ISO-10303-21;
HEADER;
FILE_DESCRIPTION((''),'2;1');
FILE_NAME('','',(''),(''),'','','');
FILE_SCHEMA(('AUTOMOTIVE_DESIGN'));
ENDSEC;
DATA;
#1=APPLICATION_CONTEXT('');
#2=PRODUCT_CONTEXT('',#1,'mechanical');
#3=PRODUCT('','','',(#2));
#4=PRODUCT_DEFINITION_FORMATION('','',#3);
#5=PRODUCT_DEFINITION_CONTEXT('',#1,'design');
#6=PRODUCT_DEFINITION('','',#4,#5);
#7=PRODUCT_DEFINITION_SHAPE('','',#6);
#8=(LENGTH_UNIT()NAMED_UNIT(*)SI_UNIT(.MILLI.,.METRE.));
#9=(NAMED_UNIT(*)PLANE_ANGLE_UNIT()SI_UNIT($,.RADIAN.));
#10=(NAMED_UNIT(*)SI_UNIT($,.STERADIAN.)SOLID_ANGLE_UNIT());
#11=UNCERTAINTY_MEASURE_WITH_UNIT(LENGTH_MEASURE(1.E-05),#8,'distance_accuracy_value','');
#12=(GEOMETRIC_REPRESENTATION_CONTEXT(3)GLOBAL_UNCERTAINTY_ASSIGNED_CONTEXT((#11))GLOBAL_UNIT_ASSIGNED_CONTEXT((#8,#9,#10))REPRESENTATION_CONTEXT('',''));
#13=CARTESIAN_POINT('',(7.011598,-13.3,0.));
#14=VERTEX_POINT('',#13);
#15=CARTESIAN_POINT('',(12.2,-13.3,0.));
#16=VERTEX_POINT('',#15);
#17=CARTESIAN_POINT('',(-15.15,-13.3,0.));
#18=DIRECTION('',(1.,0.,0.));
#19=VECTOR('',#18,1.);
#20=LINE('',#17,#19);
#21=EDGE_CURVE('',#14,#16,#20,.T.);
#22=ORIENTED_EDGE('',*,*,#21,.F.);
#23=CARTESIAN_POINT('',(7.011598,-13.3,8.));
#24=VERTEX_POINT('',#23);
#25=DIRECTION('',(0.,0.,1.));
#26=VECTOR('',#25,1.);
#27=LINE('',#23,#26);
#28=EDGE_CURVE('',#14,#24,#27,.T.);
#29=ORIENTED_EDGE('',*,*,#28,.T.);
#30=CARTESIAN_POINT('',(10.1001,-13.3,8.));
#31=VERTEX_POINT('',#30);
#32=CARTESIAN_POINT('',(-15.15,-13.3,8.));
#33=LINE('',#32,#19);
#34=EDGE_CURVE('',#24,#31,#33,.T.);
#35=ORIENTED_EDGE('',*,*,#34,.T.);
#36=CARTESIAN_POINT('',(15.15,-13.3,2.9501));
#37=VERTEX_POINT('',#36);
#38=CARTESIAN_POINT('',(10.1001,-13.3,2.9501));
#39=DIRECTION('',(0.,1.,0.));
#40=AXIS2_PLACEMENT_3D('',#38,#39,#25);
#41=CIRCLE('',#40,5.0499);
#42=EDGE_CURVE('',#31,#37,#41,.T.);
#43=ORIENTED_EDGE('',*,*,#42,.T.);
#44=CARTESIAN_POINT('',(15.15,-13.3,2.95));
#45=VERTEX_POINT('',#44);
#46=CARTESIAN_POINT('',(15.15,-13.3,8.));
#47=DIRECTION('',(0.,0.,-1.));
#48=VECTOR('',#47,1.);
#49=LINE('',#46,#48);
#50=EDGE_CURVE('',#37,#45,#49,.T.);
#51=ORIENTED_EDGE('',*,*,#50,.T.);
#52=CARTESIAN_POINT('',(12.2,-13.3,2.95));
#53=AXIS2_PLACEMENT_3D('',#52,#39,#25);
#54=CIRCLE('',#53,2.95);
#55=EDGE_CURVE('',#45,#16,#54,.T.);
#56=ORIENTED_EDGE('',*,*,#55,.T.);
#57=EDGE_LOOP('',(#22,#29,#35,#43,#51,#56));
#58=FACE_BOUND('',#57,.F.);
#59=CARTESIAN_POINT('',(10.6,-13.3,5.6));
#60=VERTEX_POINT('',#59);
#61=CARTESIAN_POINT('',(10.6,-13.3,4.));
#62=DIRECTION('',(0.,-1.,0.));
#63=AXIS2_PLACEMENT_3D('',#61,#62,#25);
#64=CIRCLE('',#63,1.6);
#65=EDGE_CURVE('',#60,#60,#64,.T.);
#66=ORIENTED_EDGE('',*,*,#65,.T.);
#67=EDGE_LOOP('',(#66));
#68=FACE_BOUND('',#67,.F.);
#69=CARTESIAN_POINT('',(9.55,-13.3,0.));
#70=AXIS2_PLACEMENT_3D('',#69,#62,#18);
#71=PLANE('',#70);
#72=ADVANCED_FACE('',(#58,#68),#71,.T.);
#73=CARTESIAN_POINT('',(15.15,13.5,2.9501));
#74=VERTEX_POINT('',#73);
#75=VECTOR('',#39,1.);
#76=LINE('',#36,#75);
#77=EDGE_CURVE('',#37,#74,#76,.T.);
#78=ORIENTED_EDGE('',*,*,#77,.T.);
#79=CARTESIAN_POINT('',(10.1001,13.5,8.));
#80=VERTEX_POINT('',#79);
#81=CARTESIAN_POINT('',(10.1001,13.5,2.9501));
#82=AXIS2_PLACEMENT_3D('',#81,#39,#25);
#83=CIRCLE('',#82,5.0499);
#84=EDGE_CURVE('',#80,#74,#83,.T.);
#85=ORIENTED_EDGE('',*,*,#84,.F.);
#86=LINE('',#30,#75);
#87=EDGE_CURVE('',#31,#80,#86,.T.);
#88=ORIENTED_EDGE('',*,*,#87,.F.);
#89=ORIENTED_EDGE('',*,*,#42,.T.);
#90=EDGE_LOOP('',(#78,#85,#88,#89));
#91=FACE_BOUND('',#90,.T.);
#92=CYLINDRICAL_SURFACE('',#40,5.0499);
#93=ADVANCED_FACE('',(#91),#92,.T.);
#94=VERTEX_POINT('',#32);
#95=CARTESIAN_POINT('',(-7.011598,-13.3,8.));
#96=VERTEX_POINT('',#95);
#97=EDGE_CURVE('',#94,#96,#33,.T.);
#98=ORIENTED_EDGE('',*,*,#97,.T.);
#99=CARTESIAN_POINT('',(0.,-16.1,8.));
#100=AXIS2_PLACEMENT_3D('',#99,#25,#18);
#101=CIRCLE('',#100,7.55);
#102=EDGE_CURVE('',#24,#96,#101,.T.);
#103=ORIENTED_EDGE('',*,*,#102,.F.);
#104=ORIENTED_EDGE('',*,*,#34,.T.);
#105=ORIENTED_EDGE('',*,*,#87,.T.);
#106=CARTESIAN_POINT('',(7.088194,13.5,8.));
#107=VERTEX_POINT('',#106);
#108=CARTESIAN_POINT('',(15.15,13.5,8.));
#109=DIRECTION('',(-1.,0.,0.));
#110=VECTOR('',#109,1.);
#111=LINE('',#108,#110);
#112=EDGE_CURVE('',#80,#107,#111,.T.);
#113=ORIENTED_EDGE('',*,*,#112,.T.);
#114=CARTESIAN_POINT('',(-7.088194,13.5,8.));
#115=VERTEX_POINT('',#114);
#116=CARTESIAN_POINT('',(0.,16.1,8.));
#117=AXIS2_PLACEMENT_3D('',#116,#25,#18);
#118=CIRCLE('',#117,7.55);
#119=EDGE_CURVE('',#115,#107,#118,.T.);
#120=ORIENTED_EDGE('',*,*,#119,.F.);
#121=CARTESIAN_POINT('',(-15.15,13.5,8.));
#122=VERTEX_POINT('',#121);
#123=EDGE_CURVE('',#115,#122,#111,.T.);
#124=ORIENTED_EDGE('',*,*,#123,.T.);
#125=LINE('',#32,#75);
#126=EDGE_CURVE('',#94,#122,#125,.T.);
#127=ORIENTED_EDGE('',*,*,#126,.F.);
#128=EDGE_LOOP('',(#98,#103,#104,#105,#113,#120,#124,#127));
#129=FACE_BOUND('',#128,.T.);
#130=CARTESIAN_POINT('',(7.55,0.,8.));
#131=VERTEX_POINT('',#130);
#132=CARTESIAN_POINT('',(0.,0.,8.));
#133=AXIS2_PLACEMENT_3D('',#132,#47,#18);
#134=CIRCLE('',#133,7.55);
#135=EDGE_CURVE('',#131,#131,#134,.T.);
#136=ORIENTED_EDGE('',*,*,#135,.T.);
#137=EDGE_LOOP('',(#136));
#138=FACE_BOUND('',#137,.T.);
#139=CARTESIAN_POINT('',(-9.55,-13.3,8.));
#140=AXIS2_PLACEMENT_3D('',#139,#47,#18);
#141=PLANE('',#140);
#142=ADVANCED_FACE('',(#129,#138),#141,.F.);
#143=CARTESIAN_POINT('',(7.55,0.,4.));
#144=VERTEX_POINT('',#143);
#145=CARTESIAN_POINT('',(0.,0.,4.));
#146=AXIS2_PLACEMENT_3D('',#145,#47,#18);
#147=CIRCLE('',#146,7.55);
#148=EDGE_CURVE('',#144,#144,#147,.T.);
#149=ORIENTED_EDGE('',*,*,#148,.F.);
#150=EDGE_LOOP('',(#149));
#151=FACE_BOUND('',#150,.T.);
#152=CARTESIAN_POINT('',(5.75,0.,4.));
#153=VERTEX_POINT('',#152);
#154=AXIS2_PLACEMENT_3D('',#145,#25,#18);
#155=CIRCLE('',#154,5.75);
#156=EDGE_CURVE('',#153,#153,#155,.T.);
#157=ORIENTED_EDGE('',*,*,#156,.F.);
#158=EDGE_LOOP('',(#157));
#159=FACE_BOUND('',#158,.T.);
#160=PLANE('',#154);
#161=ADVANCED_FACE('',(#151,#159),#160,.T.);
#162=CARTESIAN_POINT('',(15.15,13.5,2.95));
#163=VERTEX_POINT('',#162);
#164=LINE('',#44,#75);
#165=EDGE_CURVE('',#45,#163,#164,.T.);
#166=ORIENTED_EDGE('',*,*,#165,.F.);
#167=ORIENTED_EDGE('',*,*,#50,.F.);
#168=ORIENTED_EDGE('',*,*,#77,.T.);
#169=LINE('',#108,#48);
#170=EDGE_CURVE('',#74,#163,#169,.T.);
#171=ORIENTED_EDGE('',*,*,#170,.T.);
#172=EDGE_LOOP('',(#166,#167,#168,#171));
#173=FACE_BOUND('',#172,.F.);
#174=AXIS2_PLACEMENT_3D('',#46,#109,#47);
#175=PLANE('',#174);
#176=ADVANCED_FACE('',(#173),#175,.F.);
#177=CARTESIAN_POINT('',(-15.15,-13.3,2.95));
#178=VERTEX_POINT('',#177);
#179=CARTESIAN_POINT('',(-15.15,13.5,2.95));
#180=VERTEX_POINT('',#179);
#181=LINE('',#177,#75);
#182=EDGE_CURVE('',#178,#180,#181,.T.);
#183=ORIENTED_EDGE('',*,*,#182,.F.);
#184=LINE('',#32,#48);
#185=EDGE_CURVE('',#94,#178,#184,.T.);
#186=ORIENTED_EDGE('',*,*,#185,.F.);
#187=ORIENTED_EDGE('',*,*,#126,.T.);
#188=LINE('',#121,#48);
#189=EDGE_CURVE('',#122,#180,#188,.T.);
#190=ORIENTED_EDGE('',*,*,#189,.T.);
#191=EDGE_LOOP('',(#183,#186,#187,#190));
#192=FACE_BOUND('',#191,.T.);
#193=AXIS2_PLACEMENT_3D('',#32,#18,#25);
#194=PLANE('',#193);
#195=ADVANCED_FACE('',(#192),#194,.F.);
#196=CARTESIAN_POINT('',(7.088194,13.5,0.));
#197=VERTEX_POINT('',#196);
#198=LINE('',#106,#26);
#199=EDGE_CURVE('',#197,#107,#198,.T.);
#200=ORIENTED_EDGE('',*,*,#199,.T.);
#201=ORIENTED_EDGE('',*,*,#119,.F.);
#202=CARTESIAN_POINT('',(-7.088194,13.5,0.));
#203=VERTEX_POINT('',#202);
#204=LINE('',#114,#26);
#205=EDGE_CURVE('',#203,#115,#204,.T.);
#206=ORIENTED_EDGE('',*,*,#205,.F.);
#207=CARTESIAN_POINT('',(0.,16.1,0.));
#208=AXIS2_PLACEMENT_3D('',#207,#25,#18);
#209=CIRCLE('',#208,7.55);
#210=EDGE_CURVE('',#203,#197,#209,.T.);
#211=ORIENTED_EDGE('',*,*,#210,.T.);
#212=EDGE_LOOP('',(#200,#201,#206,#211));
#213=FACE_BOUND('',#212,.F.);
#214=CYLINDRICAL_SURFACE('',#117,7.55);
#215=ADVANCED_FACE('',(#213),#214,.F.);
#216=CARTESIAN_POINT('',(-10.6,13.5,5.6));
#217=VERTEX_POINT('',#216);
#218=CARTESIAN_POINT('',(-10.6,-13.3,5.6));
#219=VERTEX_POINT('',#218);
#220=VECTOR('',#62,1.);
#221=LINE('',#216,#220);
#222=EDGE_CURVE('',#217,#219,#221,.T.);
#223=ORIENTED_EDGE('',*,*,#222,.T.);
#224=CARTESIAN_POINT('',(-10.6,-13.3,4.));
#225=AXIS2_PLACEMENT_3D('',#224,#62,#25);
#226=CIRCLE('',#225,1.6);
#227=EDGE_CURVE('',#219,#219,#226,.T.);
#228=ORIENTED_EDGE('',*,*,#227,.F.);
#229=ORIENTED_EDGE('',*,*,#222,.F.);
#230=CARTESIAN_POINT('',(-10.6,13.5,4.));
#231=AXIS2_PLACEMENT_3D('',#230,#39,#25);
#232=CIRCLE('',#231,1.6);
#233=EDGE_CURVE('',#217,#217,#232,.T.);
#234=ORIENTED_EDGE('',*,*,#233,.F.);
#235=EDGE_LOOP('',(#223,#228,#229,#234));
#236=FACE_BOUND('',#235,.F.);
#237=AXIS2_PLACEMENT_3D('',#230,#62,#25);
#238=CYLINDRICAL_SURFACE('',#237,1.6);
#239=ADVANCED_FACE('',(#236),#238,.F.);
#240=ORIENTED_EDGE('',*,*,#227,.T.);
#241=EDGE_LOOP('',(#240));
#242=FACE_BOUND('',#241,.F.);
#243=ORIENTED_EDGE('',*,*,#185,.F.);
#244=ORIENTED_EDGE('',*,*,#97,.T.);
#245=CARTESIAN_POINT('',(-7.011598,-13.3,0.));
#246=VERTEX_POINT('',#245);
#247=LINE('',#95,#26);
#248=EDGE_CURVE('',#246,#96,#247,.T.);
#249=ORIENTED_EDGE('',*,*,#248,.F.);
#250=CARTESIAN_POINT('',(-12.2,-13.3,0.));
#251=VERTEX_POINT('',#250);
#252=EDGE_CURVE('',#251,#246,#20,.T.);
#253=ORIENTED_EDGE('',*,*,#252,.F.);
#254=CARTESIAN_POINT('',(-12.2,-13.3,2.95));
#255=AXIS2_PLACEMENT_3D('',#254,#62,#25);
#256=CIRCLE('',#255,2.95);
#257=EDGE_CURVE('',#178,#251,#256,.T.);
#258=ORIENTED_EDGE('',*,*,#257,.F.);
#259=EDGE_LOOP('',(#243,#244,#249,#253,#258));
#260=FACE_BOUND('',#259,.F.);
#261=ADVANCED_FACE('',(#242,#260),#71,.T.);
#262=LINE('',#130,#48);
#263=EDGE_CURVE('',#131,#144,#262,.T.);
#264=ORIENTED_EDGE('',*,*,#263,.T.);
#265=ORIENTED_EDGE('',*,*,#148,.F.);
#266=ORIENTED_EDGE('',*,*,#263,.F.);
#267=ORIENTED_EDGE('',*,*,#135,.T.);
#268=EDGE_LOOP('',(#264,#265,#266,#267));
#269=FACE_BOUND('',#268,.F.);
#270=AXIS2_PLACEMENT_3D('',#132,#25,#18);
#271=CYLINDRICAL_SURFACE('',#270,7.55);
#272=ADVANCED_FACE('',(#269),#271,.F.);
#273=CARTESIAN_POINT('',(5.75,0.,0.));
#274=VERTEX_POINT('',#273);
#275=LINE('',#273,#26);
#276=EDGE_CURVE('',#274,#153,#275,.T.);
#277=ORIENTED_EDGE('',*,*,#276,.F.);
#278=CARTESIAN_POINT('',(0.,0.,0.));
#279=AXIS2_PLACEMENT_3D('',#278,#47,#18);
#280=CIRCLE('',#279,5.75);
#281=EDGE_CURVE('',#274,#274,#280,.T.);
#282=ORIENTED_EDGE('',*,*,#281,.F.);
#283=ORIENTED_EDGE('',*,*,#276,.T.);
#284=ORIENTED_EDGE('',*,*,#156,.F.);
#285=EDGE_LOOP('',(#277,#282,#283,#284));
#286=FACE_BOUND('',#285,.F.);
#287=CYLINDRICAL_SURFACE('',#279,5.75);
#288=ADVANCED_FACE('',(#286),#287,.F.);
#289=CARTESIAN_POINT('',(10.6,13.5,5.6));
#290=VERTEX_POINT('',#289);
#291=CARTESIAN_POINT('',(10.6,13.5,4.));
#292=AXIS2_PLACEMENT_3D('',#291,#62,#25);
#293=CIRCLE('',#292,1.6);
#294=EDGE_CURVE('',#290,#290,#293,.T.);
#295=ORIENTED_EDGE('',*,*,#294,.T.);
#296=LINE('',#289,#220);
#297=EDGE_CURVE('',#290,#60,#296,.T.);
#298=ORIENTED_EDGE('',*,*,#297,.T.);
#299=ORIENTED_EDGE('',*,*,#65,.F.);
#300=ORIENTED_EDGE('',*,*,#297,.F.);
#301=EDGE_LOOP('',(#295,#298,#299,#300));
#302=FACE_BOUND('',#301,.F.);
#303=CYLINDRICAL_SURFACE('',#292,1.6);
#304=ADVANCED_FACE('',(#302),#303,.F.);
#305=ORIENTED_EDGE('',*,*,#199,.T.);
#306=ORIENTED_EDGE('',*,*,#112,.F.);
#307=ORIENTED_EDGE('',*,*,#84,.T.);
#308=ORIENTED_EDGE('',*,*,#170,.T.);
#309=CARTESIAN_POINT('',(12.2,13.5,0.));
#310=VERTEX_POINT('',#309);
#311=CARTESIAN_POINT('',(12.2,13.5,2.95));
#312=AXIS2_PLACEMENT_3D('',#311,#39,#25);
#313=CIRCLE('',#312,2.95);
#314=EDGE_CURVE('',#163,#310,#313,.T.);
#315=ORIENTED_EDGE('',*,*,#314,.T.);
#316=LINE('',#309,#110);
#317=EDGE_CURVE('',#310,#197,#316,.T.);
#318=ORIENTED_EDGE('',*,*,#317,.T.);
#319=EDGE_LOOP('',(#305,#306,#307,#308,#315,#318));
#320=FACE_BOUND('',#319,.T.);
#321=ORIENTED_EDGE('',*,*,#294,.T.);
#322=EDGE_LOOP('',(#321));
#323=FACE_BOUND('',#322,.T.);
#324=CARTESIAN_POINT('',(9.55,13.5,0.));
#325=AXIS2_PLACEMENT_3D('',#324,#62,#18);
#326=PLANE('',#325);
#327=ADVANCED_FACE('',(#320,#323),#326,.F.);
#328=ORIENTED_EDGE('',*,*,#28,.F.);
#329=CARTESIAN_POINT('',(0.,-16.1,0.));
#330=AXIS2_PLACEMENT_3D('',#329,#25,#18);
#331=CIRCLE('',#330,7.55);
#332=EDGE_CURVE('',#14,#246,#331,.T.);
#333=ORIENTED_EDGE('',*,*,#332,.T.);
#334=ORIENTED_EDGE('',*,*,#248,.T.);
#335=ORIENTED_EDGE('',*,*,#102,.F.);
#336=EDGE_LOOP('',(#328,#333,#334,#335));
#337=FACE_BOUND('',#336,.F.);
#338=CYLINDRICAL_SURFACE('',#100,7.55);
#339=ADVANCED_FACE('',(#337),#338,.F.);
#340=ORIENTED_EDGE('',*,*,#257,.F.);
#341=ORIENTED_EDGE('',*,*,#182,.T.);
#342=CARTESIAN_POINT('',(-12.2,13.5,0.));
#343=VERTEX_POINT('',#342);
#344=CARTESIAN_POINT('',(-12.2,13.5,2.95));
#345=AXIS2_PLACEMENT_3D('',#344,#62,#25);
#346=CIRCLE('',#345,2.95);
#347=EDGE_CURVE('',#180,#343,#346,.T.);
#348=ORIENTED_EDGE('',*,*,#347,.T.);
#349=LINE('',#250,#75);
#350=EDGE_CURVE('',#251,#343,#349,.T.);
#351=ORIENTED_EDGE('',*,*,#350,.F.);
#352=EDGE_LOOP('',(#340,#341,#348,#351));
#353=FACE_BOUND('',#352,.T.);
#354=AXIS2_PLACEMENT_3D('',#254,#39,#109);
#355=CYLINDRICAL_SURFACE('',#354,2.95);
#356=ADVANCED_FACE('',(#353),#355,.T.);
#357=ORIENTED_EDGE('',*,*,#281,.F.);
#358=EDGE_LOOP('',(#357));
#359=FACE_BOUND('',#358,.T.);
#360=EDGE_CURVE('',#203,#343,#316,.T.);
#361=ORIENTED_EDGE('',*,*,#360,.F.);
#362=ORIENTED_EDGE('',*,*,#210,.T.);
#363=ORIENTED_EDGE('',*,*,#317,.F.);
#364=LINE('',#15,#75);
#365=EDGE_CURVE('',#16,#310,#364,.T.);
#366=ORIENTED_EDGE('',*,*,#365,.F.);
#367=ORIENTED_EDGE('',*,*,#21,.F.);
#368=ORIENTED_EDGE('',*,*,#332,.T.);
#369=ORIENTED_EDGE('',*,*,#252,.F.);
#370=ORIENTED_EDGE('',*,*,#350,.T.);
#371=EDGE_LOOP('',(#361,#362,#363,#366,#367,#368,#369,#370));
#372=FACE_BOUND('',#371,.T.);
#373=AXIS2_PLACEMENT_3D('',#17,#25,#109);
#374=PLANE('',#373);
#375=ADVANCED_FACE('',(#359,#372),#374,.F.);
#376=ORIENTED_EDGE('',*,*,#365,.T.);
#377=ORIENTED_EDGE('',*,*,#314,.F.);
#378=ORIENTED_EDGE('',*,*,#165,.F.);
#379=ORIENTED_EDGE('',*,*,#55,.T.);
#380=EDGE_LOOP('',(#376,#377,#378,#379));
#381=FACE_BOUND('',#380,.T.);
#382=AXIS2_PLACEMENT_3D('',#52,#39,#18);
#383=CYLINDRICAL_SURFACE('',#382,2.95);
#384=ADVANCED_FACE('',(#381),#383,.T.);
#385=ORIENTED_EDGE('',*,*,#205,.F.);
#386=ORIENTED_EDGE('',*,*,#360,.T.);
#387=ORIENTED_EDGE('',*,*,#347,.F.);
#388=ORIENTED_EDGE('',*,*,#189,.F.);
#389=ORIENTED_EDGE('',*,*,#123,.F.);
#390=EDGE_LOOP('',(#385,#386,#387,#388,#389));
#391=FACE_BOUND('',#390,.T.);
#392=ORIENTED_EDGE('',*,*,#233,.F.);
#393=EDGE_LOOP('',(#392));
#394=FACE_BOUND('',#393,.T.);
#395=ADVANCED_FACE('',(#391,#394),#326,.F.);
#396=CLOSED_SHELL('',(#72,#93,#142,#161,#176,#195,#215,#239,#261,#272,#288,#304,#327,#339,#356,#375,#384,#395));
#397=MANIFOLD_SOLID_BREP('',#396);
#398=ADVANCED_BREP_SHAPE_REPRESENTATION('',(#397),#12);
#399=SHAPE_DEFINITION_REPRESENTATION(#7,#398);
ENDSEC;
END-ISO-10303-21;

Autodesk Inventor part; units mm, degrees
ref_plane "YZ Plane" through (0, 0, 0) normal (1, 0, 0) x (0, 1, 0)
ref_plane "XZ Plane" through (0, 0, 0) normal (0, 1, 0) x (-1, 0, 0)
sketch "Эскиз1" plane through (0, 0, 0) normal (0, 0, 1) x (1, 0, 0)
  circle A0 centre (0, 0) radius 5.75
  circle A1 centre (0, 0) radius 9.55
  line L0 (9.55, 13.5) -> (-9.55, 13.5)
  line L1 (-9.55, 13.5) -> (-9.55, 0)
  line L2 (-9.55, 0) -> (9.55, 0)
  line L3 (9.55, 0) -> (9.55, 13.5)
  line L4 (9.55, 0) -> (-9.55, 0)
  line L5 (-9.55, 0) -> (-9.55, -13.3)
  line L6 (-9.55, -13.3) -> (9.55, -13.3)
  line L7 (9.55, -13.3) -> (9.55, 0)
  point P0 (9.55, 0)
  point P1 (0, 9.55)
  point P2 (-9.55, 0)
  point P3 (9.55, 0)
  point P4 (-9.55, 0)
  point P5 (-4.7236, -8.3)
  point P6 (4.7236, -8.3)
  point P7 (-9.55, 0)
  point P8 (9.55, 0)
  dimension "d0" = 11.5
  dimension "d1" = 19.1
  dimension "d64" = 13.3
  dimension "d85" = 13.5
extrude "Выдавливание1" add sketch "Эскиз1" along normal blind 8 contours L2 A1 A0 | A0 L2 A1 | L7 L6 L5 A1 | A1 L1 L0 L3
ref_plane "РабПлоскость8" through (0, -13.3, 0) normal (1, 0, 0) x (0, 0, -1)
sketch "Эскиз15" plane through (0, 0, 8) normal (0, 0, 1) x (1, 0, 0)
  circle A0 centre (0, 0) radius 5.75 projected
  circle A1 centre (0, 0) radius 7.55
  dimension "d67" = 15.1
extrude "Выдавливание9" cut sketch "Эскиз15" against normal blind 4
sketch "Эскиз16" plane through (-9.55, -13.3, 0) normal (0, -1, 0) x (1, 0, 0)
  line L0 (0, 8) -> (19.1, 8) projected
  line L1 (19.1, 8) -> (24.7, 8)
  line L2 (24.7, 8) -> (24.7, 0)
  line L3 (24.7, 0) -> (19.1, 0)
  line L4 (19.1, 0) -> (19.1, 8)
  point P0 (9.55, 0)
  dimension "d70" = 5.6
  dimension "d71" = 8
extrude "Выдавливание10" add sketch "Эскиз16" against normal up to surface (26.8 mm away)
sketch "Эскиз17" plane through (-9.55, 13.5, 0) normal (0, 1, 0) x (1, 0, 0)
  line L0 (24.7, 0) -> (24.7, -8) projected
  line L1 (24.7, -4) -> (20.15, -4)
  point P0 (9.55, 0)
  dimension "d82" = 4.55
hole "Отверстие4" at (10.6, 13.5, 4) direction (0, -1, 0) diameter 3.2 end through all
fillet "Сопряжение5" radius 2.95 1 edges at (15.15, 0.1, 0)
mirror "Зеркальное отражение5" about plane through (0, -13.3, 0) normal (1, 0, 0) of "Сопряжение5", "Отверстие4", "Выдавливание10", "Выдавливание9"
fillet "Сопряжение6" radius 5.05 1 edges at (15.15, 0.1, 8)
sketch "Эскиз18" plane through (0, 0, 8) normal (0, 0, 1) x (1, 0, 0)
  circle A0 centre (0, 0) radius 7.55 projected
  circle A1 centre (0, 16.1) radius 7.55
  circle A2 centre (0, -16.1) radius 7.55
  dimension "d86" = 16.1
  dimension "d90" = 16.1
extrude "Выдавливание11" cut sketch "Эскиз18" against normal through all contours A1 | A2
equation "\"d90\" = d86"
properties part number "Крепление дифференциала"
